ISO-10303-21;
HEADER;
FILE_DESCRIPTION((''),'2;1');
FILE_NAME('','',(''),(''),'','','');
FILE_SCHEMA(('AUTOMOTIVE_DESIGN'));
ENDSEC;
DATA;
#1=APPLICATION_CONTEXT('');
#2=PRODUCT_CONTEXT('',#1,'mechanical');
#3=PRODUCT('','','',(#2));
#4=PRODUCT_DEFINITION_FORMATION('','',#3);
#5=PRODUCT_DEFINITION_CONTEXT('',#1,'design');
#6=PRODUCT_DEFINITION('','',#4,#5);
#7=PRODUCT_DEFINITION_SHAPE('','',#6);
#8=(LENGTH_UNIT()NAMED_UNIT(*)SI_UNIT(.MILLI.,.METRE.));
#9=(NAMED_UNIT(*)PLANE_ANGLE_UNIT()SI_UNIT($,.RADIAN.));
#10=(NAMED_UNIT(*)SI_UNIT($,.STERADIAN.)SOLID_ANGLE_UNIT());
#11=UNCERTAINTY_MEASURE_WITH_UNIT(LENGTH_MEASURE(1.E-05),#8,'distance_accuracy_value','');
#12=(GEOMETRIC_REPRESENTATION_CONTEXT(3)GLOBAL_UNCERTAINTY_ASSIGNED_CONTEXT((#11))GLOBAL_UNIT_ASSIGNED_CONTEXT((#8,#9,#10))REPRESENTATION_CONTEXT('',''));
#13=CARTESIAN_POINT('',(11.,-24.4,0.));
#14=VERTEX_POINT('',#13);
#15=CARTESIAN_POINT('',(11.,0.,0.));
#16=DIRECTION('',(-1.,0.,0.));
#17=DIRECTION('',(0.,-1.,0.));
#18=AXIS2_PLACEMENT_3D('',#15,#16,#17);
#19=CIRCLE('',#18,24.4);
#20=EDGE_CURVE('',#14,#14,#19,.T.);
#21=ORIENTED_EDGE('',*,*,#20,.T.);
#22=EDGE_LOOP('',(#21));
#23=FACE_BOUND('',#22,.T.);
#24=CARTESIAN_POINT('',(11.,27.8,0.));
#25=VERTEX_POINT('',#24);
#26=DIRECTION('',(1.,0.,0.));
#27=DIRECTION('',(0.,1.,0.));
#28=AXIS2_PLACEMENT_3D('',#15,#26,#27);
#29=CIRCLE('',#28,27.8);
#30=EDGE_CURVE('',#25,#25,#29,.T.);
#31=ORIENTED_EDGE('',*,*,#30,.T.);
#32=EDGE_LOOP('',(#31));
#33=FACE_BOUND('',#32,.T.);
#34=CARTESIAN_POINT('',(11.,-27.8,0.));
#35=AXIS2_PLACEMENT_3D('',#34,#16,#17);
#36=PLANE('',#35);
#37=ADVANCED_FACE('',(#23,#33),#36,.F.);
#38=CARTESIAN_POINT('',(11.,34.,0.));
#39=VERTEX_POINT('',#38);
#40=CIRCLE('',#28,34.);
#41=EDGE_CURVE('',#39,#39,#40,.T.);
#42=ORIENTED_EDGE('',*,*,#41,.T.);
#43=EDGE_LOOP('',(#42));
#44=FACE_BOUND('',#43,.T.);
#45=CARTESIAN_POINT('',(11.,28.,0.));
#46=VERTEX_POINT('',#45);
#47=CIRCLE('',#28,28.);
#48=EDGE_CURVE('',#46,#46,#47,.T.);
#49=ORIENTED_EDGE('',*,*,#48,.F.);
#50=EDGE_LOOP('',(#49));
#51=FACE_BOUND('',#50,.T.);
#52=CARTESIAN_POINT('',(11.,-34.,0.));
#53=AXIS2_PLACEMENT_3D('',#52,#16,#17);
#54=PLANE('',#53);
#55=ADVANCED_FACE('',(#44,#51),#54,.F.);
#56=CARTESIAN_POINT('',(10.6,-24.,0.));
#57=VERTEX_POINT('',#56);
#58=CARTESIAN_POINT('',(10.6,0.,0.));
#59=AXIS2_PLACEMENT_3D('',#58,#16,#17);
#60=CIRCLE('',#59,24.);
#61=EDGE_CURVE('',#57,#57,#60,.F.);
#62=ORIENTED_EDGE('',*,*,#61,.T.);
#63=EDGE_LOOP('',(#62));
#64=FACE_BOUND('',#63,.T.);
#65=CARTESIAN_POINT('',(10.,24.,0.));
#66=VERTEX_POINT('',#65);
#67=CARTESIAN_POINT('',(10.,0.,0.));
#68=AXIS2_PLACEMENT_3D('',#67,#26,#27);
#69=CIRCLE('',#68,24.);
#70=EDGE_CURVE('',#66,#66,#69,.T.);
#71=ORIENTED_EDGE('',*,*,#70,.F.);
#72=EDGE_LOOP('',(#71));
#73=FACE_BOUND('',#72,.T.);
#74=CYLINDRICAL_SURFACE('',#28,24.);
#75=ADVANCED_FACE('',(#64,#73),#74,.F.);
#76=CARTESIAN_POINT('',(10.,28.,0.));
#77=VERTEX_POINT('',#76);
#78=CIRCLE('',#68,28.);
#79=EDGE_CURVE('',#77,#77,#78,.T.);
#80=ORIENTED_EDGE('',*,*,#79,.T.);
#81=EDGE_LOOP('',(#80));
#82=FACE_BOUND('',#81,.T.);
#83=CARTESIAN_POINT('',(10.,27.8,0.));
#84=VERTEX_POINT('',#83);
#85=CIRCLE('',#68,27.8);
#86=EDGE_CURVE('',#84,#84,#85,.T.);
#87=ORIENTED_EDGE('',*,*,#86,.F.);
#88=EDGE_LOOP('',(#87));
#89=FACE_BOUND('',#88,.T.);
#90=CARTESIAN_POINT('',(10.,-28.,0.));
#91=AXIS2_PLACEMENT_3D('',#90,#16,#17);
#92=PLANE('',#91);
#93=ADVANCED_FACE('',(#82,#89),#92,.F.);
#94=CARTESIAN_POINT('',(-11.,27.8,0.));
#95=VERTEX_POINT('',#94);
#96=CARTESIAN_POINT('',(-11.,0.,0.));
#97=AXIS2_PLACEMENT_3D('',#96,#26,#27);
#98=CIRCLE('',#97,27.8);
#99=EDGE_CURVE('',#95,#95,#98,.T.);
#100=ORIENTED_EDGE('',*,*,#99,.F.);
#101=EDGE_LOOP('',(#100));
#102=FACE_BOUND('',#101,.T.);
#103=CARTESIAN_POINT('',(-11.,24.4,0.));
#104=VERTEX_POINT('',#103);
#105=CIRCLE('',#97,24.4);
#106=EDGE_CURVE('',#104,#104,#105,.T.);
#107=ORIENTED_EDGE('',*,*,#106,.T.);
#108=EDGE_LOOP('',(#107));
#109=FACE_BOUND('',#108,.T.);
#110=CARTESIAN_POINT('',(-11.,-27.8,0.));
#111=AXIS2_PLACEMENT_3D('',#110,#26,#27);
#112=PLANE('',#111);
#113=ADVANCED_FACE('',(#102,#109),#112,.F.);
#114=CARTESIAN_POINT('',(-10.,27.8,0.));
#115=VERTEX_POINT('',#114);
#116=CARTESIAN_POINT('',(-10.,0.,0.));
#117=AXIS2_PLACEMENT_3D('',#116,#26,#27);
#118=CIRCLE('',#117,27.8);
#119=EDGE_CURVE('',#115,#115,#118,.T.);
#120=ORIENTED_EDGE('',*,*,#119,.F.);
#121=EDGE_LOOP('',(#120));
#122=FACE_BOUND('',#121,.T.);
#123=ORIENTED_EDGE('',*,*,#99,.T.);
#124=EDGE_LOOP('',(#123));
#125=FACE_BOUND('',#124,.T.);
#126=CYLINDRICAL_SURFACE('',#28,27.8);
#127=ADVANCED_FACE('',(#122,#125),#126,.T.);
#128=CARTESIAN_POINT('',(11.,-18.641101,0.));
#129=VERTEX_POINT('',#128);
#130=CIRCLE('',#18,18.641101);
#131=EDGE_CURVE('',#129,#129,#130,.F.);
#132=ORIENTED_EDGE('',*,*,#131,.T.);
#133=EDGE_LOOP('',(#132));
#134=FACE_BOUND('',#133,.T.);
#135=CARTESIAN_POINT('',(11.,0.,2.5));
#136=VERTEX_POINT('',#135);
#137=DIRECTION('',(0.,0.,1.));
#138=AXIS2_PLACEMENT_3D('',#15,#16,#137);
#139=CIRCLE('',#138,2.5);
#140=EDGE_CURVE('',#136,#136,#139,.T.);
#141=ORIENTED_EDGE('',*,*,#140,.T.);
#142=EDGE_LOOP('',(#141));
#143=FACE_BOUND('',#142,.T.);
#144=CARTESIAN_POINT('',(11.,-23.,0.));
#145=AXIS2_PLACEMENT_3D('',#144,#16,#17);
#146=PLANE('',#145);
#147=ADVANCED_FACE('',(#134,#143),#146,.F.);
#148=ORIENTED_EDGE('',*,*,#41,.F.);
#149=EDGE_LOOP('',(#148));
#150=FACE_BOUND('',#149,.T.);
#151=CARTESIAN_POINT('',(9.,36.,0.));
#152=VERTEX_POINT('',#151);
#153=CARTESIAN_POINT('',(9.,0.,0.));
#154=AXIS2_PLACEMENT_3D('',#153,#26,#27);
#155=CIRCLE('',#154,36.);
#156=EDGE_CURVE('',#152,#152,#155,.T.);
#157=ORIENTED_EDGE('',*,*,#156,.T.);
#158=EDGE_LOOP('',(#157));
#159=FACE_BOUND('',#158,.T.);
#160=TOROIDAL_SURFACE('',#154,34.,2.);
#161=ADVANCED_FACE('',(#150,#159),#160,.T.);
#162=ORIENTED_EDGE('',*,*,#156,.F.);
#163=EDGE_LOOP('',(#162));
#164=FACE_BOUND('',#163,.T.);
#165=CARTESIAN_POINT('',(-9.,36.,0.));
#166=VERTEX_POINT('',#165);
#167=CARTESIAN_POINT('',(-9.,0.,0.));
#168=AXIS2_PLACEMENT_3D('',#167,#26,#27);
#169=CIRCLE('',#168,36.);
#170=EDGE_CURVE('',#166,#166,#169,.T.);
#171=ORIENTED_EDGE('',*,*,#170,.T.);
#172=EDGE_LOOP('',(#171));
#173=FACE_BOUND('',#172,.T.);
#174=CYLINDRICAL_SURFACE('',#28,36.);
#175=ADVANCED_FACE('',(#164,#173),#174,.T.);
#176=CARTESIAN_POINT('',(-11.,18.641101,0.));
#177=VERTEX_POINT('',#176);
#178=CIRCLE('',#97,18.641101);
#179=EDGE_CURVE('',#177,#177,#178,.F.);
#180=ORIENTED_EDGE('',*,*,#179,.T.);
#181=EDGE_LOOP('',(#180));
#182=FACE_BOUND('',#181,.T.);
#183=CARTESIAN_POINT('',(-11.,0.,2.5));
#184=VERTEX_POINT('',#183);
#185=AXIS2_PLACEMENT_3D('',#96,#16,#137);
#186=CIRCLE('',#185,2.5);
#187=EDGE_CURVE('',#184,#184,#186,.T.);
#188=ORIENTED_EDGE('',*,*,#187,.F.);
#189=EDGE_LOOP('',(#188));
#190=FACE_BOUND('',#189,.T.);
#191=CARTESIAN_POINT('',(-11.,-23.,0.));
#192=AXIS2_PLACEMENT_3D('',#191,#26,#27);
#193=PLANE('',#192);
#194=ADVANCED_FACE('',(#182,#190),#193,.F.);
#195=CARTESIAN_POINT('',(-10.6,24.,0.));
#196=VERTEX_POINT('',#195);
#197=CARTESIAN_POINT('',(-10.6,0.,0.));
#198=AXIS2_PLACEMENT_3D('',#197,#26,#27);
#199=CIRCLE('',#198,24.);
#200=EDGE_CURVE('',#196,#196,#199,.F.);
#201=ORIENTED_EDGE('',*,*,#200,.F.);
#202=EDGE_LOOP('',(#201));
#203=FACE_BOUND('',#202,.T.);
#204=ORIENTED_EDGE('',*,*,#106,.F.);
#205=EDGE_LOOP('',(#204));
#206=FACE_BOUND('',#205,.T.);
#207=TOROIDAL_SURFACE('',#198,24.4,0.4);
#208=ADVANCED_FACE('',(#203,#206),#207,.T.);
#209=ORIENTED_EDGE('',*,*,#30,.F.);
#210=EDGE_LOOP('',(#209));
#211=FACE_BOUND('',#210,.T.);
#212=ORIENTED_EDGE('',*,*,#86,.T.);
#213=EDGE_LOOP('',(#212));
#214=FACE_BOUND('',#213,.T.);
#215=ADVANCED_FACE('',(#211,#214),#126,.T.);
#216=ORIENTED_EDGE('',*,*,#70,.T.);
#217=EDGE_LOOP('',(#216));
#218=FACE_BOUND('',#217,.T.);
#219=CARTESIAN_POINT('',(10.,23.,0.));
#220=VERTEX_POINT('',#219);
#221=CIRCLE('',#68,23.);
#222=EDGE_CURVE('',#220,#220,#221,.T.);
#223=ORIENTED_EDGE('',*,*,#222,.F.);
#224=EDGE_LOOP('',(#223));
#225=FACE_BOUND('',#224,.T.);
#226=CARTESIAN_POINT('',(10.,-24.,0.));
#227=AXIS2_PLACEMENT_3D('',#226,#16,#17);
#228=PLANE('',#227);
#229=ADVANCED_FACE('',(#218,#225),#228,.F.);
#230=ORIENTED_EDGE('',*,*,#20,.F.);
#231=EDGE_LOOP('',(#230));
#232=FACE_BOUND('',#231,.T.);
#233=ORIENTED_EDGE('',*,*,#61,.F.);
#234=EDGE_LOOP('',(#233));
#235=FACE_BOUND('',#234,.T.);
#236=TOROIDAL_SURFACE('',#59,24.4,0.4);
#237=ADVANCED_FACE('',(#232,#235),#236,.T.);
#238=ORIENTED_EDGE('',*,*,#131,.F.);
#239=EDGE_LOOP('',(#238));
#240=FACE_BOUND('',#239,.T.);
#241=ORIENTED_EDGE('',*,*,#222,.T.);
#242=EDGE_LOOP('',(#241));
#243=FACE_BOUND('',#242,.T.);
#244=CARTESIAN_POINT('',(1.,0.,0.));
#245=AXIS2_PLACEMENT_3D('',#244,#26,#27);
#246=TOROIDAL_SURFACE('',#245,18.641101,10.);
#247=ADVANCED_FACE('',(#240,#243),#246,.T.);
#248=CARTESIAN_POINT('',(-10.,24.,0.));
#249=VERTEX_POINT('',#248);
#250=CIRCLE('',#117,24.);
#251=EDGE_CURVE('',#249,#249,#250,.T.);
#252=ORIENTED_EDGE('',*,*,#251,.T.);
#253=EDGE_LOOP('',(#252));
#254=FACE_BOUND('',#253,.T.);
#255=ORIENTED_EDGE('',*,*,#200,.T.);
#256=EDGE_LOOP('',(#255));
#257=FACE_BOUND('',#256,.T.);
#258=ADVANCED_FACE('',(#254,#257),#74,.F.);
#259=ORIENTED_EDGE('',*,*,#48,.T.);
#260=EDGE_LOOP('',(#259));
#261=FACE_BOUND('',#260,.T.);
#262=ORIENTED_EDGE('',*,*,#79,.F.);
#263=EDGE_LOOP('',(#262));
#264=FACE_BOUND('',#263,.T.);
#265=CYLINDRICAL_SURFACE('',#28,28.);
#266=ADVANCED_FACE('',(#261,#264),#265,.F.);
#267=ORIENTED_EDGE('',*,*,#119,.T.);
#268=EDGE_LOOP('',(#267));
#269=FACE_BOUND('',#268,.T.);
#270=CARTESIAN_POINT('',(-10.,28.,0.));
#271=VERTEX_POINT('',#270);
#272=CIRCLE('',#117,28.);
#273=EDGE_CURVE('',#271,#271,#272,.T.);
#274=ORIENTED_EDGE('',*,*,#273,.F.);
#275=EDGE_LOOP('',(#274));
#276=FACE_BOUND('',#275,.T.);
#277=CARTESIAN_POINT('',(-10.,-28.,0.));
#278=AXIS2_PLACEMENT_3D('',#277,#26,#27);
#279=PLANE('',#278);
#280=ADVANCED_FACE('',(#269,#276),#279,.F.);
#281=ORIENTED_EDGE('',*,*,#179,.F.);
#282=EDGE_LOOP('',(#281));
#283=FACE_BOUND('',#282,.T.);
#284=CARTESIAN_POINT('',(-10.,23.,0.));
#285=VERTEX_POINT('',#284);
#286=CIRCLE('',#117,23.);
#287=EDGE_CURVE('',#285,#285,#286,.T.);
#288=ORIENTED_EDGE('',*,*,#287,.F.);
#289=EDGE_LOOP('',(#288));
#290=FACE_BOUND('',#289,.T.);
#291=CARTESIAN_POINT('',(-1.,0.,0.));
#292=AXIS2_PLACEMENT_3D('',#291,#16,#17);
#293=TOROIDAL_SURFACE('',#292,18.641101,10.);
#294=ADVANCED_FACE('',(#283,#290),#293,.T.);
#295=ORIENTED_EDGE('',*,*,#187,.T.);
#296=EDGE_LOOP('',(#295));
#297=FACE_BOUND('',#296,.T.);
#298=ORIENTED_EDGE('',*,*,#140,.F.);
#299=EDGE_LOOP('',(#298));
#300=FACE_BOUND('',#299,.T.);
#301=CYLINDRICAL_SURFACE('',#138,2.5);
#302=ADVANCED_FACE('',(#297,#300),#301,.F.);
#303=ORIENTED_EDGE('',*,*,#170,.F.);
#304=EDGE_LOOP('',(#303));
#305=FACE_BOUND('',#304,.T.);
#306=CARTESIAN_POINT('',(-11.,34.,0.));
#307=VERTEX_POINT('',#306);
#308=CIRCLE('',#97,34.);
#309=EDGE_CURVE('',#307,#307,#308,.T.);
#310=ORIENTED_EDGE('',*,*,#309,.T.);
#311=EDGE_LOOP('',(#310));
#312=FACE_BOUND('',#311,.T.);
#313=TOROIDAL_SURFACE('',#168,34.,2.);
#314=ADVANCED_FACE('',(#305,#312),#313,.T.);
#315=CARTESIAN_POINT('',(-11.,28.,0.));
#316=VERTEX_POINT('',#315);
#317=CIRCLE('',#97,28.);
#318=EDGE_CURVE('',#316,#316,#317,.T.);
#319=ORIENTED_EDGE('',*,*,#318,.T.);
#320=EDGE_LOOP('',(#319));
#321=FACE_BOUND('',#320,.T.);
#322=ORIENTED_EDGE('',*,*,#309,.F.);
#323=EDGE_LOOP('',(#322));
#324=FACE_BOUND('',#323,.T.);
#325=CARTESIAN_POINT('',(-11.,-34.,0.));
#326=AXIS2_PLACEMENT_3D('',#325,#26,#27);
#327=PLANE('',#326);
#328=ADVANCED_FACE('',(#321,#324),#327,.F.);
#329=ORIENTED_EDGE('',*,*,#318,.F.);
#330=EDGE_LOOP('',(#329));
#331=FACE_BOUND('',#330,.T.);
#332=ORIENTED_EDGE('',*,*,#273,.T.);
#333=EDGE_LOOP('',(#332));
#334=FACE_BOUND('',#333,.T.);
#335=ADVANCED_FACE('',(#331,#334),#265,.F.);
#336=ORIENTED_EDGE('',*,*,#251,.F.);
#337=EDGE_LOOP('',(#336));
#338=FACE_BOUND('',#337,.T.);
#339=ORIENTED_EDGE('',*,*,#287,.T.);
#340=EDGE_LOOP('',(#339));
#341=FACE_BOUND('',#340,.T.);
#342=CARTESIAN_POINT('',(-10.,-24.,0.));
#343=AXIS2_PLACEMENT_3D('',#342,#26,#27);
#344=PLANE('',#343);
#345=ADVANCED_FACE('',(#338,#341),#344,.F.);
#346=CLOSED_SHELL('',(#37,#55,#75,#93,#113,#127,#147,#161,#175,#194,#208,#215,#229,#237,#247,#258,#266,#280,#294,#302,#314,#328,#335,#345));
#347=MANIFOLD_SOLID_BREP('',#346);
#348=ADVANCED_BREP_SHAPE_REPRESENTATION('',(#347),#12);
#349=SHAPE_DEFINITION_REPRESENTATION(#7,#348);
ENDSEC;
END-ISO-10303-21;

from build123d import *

# Parameters (mm, degrees)
ENL_V_MAT_EXTRU_1_DEPTH      = 53.086466642
ENL_V_MAT_EXTRU_1_DEPTH_BACK = 53.086466642
ESQUISSE2_R                  = 2.5
FILLET1_R                    = 10
FILLET2_R                    = 0.4


with BuildPart() as part:
    # Esquisse1 → Révolution1 (revolve)
    with BuildSketch(Plane.XY, mode=Mode.PRIVATE) as r_volution1_sk:
        with BuildLine():
            Line((9, -36), (-9, -36))
            ThreePointArc((-9, -36), (-10.414213562, -35.414213562), (-11, -34))
            Line((-11, -34), (-11, -28))
            Line((-11, -28), (-10, -28))
            Line((-10, -28), (-10, -27.8))
            Line((-10, -27.8), (-11, -27.8))
            Line((-11, -27.8), (-11, -24))
            Line((-11, -24), (-10, -24))
            Line((-10, -24), (-10, -23))
            Line((-10, -23), (-11, -23))
            Line((-11, -23), (-11, 0))
            Line((-11, 0), (11, 0))
            Line((11, 0), (11, -23))
            Line((11, -23), (10, -23))
            Line((10, -23), (10, -24))
            Line((10, -24), (11, -24))
            Line((11, -24), (11, -27.8))
            Line((11, -27.8), (10, -27.8))
            Line((10, -27.8), (10, -28))
            Line((10, -28), (11, -28))
            Line((11, -28), (11, -34))
            ThreePointArc((11, -34), (10.414213562, -35.414213562), (9, -36))
        make_face()
    revolve(r_volution1_sk.sketch.rotate(Axis((11, 0, 0), (-1, 0, 0)), 180), axis=Axis((11, 0, 0), (-1, 0, 0)))

    # Esquisse2 → Enlèv. mat.-Extru.1 (cut, two sides: drawn at the far end of the back side and taken through both)
    with BuildSketch(Plane.ZY.offset(-ENL_V_MAT_EXTRU_1_DEPTH_BACK)):
        Circle(ESQUISSE2_R)
    extrude(amount=ENL_V_MAT_EXTRU_1_DEPTH + ENL_V_MAT_EXTRU_1_DEPTH_BACK, mode=Mode.SUBTRACT)

    # Fillet1
    # the kernel refuses this fillet: 10 mm, written as the material it takes off along each edge
    with BuildSketch(Plane(origin=(11, 0, 0), x_dir=(0, 1, 0), z_dir=(0, 0, 1))) as fillet1_piece_1:
        with BuildLine():
            CenterArc((18.641101056, 10), FILLET1_R, 270, 25.841932763)
            Line((23, 1), (23.087177979, 0.82))
            ThreePointArc((23.087177979, 0.82), (23.2, 0.5), (23.2, 0))
            Line((23.2, 0), (23, -0.2))
            Line((23, -0.2), (18.641101056, -0.2))
            Line((18.641101056, -0.2), (18.641101056, 0))
        make_face()
    revolve(axis=Axis((11, 0, 0), (-1, 0, 0)), mode=Mode.SUBTRACT)
    with BuildSketch(Plane(origin=(-11, 0, 0), x_dir=(0, 1, 0), z_dir=(0, 0, 1))) as fillet1_piece_2:
        with BuildLine():
            CenterArc((18.641101056, -10), FILLET1_R, 64.158067237, 25.841932763)
            Line((18.641101056, 0), (18.641101056, 0.2))
            Line((18.641101056, 0.2), (23, 0.2))
            Line((23, 0.2), (23.2, 0))
            ThreePointArc((23.2, 0), (23.2, -0.5), (23.087177979, -0.82))
            Line((23.087177979, -0.82), (23, -1))
        make_face()
    revolve(axis=Axis((-11, 0, 0), (-1, 0, 0)), mode=Mode.SUBTRACT)

    # Fillet2
    fillet2_edges = [part.edges().sort_by_distance(p)[0] for p in [
        (11, -24, 0),
        (-11, -24, 0),
    ]]
    fillet(fillet2_edges, radius=FILLET2_R)


solid = part.part
